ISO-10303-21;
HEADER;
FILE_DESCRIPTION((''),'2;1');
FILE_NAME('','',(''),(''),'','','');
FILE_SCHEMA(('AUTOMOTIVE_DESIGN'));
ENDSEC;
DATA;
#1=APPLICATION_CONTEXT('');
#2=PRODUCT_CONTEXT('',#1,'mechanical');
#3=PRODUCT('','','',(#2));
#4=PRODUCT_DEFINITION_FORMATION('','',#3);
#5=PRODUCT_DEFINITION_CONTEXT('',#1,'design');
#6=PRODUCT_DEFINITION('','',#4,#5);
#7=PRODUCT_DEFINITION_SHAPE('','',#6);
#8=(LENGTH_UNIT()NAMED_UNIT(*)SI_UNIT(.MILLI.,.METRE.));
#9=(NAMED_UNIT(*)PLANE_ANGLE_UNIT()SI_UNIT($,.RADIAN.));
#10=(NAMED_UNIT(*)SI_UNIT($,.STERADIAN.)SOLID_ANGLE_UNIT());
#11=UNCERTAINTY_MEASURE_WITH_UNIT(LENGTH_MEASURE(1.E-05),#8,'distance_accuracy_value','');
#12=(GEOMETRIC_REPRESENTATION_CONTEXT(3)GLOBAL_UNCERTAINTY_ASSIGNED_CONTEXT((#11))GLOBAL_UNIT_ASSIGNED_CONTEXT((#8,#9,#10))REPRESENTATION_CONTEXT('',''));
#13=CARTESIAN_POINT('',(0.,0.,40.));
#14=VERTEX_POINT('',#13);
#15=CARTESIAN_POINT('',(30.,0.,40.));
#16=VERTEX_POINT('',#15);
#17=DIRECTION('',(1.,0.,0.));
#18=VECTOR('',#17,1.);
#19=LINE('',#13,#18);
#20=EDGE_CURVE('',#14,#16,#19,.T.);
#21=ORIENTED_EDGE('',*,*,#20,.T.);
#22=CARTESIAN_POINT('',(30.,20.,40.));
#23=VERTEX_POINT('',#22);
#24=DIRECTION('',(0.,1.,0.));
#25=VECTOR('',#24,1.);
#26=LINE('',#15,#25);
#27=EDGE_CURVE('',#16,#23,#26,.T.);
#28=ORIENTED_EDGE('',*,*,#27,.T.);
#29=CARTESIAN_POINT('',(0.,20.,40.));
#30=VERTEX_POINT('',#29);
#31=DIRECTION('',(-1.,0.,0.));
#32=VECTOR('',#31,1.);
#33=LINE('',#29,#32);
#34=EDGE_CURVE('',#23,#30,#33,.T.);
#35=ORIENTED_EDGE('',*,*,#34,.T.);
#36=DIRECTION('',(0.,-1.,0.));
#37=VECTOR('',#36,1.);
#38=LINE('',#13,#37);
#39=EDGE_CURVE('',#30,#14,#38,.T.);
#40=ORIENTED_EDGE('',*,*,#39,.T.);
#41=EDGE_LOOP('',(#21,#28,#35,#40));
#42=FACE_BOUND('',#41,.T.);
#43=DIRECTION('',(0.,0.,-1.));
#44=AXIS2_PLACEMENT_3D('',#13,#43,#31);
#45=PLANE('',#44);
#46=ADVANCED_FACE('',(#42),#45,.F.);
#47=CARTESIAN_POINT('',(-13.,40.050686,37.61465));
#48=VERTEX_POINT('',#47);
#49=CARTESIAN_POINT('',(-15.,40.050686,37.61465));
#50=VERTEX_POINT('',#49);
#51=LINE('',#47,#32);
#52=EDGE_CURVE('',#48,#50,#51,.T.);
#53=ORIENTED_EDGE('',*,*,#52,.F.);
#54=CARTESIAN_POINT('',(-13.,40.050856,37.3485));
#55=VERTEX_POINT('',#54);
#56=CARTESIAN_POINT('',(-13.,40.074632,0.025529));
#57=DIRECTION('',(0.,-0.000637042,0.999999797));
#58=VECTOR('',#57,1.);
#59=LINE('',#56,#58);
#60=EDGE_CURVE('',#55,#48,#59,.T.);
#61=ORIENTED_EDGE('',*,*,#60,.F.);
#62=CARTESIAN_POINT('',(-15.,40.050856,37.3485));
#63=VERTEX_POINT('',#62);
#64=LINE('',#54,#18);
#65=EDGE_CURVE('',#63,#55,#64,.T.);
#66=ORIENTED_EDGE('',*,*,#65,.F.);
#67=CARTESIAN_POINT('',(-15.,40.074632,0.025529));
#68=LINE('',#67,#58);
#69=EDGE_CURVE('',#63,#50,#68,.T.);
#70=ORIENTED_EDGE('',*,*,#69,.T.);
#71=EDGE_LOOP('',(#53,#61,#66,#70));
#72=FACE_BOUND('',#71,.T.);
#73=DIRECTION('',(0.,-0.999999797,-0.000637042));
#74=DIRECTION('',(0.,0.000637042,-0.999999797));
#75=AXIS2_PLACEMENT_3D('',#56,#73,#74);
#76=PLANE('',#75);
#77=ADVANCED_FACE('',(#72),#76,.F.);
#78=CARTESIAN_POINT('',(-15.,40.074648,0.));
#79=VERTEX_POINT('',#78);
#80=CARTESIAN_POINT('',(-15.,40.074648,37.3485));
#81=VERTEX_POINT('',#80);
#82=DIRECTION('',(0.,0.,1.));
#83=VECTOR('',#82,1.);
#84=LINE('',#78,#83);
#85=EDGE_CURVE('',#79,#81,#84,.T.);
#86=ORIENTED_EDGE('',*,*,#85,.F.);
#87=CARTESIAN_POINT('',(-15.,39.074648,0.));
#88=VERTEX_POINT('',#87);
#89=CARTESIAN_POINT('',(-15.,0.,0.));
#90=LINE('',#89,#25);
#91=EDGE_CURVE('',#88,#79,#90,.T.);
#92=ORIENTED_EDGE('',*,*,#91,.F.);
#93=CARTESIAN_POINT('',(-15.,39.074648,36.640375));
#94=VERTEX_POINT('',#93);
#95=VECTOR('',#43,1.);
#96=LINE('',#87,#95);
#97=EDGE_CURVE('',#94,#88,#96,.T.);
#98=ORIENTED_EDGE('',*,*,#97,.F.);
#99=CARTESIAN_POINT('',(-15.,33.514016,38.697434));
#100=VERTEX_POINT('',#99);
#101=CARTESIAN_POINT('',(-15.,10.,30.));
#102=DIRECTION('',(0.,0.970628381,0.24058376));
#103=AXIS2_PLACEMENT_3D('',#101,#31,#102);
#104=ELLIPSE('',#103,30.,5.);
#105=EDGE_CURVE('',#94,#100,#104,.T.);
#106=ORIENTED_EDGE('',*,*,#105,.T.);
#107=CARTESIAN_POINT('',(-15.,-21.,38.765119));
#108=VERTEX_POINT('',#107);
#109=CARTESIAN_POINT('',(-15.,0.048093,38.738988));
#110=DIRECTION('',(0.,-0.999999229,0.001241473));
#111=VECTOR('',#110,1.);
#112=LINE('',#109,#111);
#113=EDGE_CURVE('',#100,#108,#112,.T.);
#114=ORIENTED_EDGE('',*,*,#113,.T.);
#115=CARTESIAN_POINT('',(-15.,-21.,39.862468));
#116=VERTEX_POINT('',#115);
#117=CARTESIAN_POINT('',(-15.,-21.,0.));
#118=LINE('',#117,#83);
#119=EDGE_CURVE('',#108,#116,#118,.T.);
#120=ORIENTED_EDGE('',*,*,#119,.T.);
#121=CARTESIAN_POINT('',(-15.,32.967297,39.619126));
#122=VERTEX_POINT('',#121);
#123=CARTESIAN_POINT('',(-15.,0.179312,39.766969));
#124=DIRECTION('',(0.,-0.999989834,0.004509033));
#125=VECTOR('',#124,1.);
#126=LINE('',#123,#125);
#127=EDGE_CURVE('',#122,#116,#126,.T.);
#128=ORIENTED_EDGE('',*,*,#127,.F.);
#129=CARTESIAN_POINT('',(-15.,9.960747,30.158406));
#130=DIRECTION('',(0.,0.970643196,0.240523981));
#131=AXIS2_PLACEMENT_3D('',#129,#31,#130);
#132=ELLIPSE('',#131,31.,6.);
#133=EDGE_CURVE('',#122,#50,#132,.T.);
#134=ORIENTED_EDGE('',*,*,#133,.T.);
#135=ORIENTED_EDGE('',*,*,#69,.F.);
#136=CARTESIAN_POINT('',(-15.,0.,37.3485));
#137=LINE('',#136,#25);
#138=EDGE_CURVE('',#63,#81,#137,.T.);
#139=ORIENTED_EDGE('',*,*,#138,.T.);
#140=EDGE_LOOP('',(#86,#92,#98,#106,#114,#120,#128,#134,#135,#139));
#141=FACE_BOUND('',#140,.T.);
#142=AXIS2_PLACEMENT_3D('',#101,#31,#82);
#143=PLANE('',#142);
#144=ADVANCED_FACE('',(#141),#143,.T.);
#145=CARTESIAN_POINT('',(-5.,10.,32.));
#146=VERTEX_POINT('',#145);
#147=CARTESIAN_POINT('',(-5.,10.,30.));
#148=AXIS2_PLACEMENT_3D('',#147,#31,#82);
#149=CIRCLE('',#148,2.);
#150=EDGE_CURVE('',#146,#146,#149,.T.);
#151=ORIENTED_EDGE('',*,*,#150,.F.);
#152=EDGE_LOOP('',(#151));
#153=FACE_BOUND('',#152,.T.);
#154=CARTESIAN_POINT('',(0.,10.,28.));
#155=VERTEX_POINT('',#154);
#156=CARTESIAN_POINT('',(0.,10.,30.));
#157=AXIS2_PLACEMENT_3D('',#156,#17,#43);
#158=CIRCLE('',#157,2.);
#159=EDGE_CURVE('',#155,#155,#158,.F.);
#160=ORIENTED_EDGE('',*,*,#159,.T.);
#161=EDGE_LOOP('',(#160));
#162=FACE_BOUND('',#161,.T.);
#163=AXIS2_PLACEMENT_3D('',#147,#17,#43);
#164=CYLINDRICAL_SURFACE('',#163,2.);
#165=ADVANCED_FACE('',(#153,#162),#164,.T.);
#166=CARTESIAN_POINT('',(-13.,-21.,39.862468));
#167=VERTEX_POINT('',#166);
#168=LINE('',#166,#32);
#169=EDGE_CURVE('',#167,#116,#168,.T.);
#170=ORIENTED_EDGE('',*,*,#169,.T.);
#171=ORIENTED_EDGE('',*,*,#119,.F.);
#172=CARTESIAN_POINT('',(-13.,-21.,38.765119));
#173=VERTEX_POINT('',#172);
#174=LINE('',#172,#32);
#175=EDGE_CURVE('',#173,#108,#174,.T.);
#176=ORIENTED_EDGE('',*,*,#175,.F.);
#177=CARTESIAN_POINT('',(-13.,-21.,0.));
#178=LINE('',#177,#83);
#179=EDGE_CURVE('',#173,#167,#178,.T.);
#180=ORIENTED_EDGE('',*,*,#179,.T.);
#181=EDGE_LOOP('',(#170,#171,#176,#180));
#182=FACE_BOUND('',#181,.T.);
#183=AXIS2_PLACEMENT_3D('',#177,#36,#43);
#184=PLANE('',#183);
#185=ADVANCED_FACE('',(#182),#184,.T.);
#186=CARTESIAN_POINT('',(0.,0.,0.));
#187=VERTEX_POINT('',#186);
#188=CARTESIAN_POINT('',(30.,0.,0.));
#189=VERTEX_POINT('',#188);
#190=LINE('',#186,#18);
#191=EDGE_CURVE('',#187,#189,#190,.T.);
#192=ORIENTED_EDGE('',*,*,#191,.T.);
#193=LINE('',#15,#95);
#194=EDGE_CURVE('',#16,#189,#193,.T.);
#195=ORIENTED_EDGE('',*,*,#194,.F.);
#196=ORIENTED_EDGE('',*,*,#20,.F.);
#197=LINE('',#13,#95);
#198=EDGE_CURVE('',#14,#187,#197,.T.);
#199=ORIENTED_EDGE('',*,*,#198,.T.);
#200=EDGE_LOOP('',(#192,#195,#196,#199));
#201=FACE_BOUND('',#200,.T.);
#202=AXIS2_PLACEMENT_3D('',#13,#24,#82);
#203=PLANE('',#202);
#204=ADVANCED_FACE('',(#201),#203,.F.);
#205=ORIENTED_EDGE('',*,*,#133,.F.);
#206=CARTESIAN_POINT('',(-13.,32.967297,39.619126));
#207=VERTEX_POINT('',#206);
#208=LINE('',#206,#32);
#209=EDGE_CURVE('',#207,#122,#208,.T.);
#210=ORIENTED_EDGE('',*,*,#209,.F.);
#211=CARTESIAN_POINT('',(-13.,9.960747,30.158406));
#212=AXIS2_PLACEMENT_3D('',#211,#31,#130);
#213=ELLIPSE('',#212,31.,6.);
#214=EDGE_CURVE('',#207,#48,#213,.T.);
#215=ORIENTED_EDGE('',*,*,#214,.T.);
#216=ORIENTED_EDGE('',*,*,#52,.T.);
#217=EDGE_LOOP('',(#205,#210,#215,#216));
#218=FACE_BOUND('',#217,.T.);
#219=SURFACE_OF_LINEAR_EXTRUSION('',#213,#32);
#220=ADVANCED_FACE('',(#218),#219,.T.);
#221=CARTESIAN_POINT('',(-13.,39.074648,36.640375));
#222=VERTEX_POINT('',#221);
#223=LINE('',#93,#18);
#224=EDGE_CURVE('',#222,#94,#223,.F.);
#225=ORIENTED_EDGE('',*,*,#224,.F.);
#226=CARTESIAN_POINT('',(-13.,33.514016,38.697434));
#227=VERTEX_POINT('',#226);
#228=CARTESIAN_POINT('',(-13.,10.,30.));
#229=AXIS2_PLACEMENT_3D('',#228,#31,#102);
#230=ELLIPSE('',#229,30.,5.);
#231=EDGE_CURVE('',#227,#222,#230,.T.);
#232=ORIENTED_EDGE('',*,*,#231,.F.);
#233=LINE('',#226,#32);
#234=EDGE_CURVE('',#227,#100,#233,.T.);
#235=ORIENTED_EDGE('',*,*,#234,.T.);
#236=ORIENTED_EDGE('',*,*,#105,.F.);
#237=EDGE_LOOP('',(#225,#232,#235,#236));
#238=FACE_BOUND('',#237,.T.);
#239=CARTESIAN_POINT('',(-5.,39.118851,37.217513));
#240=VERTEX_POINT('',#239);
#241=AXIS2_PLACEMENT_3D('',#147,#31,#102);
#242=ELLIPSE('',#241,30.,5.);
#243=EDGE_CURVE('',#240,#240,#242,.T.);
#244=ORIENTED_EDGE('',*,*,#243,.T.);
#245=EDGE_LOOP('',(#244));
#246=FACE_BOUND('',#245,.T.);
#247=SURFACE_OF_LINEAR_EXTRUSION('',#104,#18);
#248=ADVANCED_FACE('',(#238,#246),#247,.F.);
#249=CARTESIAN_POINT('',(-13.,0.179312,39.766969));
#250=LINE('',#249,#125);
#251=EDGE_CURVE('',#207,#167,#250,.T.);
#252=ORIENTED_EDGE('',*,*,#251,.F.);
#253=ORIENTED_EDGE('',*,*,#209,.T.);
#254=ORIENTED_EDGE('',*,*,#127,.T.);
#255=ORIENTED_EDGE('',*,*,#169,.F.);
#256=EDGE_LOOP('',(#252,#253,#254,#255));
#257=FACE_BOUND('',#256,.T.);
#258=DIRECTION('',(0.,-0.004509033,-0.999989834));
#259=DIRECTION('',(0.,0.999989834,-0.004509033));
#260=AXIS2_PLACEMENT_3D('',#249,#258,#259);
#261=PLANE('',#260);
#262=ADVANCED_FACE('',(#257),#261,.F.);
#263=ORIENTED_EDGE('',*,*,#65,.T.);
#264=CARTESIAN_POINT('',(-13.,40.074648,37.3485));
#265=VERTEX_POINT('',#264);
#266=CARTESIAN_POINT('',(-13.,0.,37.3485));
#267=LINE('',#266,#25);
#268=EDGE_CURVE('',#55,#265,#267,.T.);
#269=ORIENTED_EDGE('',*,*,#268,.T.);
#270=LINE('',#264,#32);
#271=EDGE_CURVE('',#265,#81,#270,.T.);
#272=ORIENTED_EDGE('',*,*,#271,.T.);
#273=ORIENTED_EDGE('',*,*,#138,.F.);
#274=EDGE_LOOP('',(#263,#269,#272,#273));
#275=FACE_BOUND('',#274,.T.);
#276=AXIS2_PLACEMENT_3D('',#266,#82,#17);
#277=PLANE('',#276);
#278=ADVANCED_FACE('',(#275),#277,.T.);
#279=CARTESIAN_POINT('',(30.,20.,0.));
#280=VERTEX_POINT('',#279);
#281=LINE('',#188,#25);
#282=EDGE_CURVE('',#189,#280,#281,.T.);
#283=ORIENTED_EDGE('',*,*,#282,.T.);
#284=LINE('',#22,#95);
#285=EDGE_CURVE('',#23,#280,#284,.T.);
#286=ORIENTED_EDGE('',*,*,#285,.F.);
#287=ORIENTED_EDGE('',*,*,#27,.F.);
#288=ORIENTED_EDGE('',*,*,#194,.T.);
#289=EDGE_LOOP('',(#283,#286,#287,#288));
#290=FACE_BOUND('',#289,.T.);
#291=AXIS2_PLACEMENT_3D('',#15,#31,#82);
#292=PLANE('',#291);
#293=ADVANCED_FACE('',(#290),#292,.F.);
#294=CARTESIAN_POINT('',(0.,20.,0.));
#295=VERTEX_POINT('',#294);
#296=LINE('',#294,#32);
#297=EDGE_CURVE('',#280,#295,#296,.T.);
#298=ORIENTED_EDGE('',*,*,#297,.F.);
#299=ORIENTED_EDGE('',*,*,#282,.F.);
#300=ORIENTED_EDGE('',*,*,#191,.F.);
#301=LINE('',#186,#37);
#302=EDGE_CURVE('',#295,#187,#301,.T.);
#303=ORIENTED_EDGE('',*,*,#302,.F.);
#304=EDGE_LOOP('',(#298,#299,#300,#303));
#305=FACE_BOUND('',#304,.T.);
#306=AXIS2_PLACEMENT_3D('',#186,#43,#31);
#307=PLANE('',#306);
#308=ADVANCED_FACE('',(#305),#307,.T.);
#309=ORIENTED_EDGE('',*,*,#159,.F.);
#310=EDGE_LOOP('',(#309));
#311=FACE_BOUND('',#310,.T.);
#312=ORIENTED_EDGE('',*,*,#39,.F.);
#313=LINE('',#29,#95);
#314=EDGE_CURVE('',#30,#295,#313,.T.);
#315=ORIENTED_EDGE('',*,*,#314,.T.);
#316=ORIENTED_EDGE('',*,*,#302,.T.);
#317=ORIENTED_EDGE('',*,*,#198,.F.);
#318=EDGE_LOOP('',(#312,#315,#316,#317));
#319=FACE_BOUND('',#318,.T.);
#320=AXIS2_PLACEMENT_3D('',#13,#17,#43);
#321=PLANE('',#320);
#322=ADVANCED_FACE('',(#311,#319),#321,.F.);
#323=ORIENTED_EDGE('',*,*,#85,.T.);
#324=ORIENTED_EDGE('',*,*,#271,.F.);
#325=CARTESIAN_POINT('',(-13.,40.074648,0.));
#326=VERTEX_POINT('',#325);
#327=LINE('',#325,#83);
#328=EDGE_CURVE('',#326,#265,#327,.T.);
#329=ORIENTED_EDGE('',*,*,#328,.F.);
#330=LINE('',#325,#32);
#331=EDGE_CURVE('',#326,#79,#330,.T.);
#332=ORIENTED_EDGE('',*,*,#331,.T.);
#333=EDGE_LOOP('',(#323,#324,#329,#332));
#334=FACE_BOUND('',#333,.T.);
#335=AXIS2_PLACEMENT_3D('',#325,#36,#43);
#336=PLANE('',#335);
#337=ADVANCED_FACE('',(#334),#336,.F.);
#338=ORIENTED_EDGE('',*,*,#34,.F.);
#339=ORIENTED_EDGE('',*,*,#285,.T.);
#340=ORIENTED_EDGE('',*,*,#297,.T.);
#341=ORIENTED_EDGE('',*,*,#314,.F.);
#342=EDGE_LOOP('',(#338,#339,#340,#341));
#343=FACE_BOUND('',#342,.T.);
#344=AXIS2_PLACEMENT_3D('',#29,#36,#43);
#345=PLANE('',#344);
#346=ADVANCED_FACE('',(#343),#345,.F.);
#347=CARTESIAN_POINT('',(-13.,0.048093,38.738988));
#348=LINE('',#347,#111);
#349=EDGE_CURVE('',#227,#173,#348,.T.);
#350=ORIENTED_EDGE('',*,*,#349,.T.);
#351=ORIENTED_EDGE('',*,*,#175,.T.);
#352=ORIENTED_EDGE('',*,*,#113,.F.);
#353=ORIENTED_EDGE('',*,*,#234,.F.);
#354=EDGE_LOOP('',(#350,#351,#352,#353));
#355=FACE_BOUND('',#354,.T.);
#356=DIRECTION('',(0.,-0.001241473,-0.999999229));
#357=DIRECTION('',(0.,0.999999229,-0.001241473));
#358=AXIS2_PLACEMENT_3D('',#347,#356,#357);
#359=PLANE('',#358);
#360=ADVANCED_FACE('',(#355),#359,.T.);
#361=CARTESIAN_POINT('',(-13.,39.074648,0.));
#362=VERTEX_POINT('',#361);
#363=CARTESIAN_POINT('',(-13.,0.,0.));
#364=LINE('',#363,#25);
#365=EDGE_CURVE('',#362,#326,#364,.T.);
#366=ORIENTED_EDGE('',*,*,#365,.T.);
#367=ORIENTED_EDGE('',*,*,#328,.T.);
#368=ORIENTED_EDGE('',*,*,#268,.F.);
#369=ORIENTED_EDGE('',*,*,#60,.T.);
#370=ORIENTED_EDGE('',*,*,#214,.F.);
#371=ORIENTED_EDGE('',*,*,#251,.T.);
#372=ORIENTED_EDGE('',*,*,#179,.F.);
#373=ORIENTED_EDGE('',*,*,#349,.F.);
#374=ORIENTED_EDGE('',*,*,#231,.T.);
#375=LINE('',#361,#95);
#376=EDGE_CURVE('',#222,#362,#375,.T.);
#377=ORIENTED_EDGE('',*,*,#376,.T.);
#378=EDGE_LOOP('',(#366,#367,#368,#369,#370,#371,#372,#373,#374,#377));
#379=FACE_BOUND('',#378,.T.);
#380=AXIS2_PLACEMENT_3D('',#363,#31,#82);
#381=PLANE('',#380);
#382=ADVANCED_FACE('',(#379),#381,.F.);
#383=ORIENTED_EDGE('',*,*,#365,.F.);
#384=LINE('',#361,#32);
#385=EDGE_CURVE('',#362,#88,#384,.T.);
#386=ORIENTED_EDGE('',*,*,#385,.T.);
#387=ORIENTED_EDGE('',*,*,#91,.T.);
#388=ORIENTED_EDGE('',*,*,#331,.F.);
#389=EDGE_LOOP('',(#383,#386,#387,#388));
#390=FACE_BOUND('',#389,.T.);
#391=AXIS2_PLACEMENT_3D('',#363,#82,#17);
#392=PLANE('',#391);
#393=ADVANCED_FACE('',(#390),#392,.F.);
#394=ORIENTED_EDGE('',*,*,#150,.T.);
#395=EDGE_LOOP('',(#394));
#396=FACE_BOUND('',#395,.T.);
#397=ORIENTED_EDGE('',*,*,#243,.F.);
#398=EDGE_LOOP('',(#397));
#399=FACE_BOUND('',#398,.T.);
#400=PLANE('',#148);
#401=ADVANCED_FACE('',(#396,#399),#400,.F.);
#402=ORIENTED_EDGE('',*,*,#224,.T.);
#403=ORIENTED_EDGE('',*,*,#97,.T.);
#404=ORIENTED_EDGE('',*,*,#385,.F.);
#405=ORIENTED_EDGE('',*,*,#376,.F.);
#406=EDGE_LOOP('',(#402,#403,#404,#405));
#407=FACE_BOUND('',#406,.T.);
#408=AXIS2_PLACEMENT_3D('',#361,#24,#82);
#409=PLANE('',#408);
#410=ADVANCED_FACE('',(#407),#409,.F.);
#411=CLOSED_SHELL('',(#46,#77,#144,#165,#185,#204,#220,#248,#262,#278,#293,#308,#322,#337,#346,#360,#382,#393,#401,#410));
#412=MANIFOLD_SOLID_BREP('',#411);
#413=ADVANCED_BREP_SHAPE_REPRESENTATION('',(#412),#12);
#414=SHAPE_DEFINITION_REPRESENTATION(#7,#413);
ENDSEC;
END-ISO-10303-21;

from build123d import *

# Parameters (mm, degrees)
SKETCH_1_W      = 30
SKETCH_1_H      = 20
EXTRUDE_1_DEPTH = 40
SKETCH_2_R      = 2
EXTRUDE_2_DEPTH = 5
SKETCH_3_RX     = 30
SKETCH_3_RY     = 5
EXTRUDE_3_DEPTH = 10
SKETCH_4_W      = 37.348500324
SKETCH_4_H      = 1
EXTRUDE_4_DEPTH = 2
EXTRUDE_START   = -2
EXTRUDE_5_DEPTH = 2


# Read off the part's stored shape, not the designer's step: 凸台-拉伸5
with BuildPart() as part:
    # 草图1 → 凸台-拉伸1 (new body)
    with BuildSketch(Plane.XY):
        with Locations((15, 10)):
            Rectangle(SKETCH_1_W, SKETCH_1_H)
    extrude(amount=EXTRUDE_1_DEPTH)

    # 草图2 → 凸台-拉伸2 (add)
    with BuildSketch(Plane.ZY):
        with Locations(Location((30, 10, 0), (0, 0, 180))):
            Circle(SKETCH_2_R)
    extrude(amount=EXTRUDE_2_DEPTH)

    # 草图3 → 凸台-拉伸3 (add)
    with BuildSketch(Plane.ZY.offset(5)):
        with Locations(Location((30, 10), (0, 0, -103.92099691))):
            Ellipse(SKETCH_3_RX, SKETCH_3_RY)
    extrude(amount=EXTRUDE_3_DEPTH)

    # 草图4 → 凸台-拉伸4 (add)
    with BuildSketch(Plane.ZY.offset(15)):
        with Locations((18.674250162, 39.574648358)):
            Rectangle(SKETCH_4_W, SKETCH_4_H)
    extrude(amount=-EXTRUDE_4_DEPTH)

    # 凸台-拉伸5 outline → 凸台-拉伸5 (add)
    with BuildSketch(Plane.ZY.offset(15).offset(EXTRUDE_START)):
        with BuildLine():
            Line((39.862468471, -21), (39.619125683, 32.967296936))
            add(Edge.make_bspline(
                [(39.619125683, 32.967296936), (39.589392589, 39.561347803), (37.614649654, 40.050686248)],
                knots=[5.629361553, 5.629361553, 5.629361553, 6.283185307, 6.283185307, 6.283185307], degree=2, weights=[1, 0.947038516, 1]))
            Line((37.614649654, 40.050686248), (37.348500324, 40.050855796))
            Line((37.348500324, 40.050855796), (37.348500324, 39.074648358))
            add(Edge.make_bspline(
                [(38.697434301, 33.514015855), (38.694345199, 38.494694197), (37.348500324, 39.074648358)],
                knots=[5.657287765, 5.657287765, 5.657287765, 6.250122592, 6.250122592, 6.250122592], degree=2, weights=[0.790463711, 0.847402464, 0.984462923]))
            Line((38.697434301, 33.514015855), (38.765118588, -21))
            Line((38.765118588, -21), (39.862468471, -21))
        make_face()
    extrude(amount=EXTRUDE_5_DEPTH)


solid = part.part
